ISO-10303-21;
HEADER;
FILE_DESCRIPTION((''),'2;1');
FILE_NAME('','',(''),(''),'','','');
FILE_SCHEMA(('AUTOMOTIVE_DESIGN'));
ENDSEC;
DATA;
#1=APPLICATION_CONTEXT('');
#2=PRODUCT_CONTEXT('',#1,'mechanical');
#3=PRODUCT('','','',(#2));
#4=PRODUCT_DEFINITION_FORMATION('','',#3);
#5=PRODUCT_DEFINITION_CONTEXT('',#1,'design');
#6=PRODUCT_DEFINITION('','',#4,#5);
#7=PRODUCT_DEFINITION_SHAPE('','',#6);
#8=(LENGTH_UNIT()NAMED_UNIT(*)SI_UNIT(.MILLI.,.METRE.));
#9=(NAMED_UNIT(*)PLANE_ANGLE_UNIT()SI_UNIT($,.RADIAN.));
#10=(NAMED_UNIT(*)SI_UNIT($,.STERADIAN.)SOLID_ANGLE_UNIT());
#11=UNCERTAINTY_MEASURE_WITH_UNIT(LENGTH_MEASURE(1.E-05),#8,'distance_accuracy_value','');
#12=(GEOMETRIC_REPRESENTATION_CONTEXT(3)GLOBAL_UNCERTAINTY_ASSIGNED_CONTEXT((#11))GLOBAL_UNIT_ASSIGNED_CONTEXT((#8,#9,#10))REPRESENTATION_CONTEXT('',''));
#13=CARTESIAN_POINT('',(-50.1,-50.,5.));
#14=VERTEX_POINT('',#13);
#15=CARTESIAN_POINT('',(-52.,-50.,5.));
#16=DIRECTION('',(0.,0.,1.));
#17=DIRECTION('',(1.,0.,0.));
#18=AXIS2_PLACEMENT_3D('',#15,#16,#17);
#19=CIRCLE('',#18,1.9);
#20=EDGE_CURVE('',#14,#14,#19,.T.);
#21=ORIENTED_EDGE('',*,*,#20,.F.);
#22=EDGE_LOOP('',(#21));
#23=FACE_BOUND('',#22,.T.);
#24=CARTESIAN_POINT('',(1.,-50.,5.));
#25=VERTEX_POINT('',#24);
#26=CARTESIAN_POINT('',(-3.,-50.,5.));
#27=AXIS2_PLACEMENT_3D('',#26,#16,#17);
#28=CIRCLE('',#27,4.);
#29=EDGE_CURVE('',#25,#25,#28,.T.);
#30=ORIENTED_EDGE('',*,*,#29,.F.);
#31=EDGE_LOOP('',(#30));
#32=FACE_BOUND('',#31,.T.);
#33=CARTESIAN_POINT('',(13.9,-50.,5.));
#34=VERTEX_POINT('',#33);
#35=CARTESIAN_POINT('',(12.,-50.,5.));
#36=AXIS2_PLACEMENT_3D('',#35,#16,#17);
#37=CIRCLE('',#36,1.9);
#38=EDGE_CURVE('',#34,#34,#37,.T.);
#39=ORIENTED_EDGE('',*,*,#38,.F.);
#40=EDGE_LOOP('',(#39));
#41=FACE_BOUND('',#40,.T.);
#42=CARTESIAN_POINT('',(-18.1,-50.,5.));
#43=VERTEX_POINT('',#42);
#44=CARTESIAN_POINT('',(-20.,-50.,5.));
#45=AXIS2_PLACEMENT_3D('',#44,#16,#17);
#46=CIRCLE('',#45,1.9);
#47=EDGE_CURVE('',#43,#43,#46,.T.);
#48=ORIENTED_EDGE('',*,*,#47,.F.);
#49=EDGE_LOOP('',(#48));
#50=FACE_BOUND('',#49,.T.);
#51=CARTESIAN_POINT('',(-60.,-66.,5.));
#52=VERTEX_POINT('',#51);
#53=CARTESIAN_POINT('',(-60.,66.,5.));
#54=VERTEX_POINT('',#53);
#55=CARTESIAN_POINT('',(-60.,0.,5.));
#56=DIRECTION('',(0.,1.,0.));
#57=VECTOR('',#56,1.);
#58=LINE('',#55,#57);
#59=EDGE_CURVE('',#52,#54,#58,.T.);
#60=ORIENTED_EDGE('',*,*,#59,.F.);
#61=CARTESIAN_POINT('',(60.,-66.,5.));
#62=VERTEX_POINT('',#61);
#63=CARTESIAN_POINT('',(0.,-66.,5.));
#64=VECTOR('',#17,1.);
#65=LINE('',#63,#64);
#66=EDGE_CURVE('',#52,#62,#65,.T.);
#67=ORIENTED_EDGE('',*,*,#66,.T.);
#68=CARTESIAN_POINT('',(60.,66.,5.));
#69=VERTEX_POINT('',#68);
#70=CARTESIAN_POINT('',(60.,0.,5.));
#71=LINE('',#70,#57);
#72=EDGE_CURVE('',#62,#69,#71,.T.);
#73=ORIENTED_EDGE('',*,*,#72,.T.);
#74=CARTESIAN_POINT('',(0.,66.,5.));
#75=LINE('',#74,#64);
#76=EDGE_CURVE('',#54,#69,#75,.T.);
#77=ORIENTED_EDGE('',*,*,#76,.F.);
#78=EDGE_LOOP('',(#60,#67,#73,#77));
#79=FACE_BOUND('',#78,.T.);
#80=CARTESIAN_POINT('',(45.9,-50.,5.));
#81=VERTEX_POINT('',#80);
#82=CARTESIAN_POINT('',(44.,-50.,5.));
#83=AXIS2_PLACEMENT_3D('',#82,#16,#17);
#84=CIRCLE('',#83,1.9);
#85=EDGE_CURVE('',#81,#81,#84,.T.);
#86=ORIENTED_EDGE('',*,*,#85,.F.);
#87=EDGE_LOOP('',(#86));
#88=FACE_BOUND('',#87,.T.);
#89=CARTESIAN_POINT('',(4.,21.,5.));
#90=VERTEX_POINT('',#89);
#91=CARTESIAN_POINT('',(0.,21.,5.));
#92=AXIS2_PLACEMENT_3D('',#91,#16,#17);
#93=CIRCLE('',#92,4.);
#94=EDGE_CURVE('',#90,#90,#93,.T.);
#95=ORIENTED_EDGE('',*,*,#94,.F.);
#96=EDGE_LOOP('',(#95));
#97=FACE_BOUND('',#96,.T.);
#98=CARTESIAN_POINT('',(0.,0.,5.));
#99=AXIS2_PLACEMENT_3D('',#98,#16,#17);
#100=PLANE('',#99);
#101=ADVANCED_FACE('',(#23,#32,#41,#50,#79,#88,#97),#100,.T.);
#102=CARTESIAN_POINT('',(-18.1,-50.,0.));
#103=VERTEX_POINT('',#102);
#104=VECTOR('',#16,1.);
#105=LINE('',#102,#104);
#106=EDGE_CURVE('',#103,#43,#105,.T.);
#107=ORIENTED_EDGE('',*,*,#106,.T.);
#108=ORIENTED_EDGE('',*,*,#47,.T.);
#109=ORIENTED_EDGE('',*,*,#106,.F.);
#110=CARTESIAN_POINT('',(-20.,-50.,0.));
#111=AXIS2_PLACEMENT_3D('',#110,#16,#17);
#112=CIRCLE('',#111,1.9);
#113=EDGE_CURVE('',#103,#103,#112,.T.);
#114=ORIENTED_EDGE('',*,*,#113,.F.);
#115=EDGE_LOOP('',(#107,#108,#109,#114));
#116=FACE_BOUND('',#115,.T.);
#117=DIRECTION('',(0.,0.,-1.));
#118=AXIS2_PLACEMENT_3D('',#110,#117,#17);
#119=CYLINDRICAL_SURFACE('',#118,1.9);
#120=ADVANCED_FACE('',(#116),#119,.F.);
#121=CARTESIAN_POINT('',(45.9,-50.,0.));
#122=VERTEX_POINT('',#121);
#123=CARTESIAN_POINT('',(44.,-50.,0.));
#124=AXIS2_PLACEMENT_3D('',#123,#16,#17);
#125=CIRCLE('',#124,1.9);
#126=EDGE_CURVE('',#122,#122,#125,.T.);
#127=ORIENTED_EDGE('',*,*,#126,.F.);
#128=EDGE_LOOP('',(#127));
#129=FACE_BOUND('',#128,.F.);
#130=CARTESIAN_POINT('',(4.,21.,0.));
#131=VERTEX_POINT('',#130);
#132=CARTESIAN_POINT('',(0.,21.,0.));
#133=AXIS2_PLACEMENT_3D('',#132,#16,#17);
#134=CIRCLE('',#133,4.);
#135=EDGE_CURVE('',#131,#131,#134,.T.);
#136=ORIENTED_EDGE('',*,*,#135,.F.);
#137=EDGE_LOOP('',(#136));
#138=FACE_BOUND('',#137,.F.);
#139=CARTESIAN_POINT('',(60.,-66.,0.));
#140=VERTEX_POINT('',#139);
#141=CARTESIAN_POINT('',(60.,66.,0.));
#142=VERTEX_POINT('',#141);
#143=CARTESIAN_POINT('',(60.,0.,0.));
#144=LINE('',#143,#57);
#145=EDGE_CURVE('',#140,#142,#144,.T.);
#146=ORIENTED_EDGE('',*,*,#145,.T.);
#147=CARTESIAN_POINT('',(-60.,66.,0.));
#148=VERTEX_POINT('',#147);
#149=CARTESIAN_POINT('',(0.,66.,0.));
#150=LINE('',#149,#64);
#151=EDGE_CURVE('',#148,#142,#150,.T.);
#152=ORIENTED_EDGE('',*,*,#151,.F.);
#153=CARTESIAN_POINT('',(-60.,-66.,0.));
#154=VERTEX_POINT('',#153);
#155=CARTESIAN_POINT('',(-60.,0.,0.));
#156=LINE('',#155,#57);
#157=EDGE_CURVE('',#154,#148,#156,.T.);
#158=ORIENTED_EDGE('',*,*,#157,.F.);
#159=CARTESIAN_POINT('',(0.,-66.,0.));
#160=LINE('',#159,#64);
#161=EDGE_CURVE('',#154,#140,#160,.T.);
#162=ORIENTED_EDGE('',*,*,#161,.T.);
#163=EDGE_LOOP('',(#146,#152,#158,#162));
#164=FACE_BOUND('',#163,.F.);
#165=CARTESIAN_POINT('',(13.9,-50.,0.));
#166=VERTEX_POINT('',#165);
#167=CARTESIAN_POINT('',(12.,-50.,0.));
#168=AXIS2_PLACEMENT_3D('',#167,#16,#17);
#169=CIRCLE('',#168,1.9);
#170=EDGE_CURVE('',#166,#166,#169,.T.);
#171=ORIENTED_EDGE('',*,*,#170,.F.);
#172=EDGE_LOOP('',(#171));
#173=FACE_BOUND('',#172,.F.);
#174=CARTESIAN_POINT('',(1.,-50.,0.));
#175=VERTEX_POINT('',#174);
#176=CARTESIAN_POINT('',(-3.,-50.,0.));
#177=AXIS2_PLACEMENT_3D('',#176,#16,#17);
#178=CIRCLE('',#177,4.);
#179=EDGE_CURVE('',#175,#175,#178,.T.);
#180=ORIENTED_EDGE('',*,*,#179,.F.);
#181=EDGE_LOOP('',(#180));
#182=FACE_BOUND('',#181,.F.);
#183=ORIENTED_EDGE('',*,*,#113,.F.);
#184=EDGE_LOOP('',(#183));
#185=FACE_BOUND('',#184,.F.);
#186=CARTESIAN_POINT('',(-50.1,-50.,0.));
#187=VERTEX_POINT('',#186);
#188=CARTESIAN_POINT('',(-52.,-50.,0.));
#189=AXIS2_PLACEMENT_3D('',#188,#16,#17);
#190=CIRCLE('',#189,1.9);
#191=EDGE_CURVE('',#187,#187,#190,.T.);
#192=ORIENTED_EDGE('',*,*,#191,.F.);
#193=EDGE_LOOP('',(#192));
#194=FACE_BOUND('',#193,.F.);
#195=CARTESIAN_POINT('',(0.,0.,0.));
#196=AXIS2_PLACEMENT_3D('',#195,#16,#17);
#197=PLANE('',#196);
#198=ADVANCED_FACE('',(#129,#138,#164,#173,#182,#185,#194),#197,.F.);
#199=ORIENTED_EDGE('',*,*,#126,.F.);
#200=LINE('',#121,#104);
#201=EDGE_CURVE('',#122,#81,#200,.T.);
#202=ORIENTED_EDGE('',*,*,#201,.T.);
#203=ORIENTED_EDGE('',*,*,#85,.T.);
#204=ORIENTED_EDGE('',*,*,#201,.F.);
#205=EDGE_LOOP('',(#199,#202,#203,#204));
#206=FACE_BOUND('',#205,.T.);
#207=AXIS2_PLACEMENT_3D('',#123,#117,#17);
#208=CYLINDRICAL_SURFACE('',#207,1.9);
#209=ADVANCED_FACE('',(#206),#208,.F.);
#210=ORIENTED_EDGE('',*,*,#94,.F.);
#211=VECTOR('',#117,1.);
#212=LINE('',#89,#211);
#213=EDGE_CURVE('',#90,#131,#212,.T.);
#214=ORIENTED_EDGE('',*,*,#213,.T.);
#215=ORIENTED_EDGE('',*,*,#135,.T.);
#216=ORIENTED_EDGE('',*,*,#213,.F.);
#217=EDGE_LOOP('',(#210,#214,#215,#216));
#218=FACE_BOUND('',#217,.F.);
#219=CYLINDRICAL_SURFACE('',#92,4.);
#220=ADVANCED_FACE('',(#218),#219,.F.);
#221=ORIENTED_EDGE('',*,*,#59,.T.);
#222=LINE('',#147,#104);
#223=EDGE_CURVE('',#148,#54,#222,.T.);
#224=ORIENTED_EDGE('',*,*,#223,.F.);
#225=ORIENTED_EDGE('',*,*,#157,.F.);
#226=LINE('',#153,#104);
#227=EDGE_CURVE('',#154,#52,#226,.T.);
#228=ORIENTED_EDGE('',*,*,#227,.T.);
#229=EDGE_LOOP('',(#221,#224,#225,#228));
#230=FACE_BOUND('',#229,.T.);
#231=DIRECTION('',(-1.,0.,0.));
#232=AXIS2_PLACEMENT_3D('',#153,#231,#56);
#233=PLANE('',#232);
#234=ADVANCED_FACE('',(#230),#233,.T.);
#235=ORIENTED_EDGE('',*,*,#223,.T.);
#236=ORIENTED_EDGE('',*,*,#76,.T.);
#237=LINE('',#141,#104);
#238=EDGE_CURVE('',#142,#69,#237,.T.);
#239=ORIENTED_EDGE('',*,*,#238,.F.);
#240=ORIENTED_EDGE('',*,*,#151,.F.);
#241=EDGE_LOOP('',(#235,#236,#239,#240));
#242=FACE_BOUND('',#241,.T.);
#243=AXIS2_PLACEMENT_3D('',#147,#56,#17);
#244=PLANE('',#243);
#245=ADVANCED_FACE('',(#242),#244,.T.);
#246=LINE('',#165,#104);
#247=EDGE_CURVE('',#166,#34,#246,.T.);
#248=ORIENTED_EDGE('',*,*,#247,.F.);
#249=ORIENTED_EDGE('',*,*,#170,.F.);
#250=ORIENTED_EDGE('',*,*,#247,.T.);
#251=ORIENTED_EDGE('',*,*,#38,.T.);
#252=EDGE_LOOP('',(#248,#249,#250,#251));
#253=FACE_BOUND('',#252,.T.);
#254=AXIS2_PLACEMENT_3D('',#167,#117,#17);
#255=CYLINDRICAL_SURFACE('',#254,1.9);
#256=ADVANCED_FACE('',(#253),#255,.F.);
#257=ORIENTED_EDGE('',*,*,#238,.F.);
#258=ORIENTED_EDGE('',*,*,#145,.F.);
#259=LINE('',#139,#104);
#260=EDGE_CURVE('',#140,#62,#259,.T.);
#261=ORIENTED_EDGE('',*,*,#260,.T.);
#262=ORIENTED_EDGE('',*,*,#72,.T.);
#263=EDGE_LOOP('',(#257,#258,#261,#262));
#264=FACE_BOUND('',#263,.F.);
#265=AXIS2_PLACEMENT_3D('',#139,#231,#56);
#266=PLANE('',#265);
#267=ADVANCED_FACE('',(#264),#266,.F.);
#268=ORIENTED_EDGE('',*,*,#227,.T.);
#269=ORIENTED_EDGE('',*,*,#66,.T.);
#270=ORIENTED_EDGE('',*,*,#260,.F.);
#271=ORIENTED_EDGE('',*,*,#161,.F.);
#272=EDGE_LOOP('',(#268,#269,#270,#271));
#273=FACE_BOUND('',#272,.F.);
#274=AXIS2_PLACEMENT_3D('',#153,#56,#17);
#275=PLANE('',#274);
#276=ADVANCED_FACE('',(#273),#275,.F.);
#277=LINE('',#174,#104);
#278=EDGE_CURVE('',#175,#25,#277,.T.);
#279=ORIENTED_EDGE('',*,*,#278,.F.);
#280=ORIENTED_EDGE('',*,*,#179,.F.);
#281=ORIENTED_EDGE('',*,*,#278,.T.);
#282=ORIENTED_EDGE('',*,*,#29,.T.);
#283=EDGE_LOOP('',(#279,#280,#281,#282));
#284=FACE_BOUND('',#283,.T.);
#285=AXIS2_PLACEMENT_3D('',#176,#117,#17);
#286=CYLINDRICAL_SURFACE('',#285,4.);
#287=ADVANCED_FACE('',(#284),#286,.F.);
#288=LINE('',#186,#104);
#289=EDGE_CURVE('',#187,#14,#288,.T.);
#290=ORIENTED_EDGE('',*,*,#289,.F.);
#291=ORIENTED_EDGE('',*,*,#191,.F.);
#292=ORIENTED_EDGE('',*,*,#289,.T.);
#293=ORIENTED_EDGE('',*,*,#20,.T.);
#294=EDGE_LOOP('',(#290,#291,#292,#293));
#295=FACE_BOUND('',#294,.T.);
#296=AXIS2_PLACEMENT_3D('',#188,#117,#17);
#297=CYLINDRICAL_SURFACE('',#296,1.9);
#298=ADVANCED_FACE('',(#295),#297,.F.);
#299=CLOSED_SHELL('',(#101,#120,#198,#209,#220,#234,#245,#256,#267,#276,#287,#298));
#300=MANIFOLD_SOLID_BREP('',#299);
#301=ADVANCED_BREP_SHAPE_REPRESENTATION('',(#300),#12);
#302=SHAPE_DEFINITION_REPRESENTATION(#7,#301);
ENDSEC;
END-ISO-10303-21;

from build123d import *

# Parameters (mm, degrees)
F0_W     = 120
F0_H     = 132
F0_R     = 1.9
F0_R_2   = 4
F1_DEPTH = 5
F2_R     = 4
F3_DEPTH = 25


# Not quite as in the source:
# - a feature names something its author has since deleted; it is built from what else it names


with BuildPart() as f1:
    # F0 (on Top) → F1 (new body)
    with BuildSketch(Plane.XY):
        Rectangle(F0_W, F0_H)
        with Locations((-52, -50)):
            Circle(F0_R, mode=Mode.SUBTRACT)
        with Locations((-20, -50)):
            Circle(F0_R, mode=Mode.SUBTRACT)
        with Locations((-3, -50)):
            Circle(F0_R_2, mode=Mode.SUBTRACT)
        with Locations((12, -50)):
            Circle(F0_R, mode=Mode.SUBTRACT)
        with Locations((44, -50)):
            Circle(F0_R, mode=Mode.SUBTRACT)
    extrude(amount=F1_DEPTH)

    # F2 (on face) → F3 (cut)
    with BuildSketch(Plane.XY.offset(5)):
        with Locations((0, 21)):
            Circle(F2_R)
    extrude(amount=-F3_DEPTH, mode=Mode.SUBTRACT)


solid = f1.part
